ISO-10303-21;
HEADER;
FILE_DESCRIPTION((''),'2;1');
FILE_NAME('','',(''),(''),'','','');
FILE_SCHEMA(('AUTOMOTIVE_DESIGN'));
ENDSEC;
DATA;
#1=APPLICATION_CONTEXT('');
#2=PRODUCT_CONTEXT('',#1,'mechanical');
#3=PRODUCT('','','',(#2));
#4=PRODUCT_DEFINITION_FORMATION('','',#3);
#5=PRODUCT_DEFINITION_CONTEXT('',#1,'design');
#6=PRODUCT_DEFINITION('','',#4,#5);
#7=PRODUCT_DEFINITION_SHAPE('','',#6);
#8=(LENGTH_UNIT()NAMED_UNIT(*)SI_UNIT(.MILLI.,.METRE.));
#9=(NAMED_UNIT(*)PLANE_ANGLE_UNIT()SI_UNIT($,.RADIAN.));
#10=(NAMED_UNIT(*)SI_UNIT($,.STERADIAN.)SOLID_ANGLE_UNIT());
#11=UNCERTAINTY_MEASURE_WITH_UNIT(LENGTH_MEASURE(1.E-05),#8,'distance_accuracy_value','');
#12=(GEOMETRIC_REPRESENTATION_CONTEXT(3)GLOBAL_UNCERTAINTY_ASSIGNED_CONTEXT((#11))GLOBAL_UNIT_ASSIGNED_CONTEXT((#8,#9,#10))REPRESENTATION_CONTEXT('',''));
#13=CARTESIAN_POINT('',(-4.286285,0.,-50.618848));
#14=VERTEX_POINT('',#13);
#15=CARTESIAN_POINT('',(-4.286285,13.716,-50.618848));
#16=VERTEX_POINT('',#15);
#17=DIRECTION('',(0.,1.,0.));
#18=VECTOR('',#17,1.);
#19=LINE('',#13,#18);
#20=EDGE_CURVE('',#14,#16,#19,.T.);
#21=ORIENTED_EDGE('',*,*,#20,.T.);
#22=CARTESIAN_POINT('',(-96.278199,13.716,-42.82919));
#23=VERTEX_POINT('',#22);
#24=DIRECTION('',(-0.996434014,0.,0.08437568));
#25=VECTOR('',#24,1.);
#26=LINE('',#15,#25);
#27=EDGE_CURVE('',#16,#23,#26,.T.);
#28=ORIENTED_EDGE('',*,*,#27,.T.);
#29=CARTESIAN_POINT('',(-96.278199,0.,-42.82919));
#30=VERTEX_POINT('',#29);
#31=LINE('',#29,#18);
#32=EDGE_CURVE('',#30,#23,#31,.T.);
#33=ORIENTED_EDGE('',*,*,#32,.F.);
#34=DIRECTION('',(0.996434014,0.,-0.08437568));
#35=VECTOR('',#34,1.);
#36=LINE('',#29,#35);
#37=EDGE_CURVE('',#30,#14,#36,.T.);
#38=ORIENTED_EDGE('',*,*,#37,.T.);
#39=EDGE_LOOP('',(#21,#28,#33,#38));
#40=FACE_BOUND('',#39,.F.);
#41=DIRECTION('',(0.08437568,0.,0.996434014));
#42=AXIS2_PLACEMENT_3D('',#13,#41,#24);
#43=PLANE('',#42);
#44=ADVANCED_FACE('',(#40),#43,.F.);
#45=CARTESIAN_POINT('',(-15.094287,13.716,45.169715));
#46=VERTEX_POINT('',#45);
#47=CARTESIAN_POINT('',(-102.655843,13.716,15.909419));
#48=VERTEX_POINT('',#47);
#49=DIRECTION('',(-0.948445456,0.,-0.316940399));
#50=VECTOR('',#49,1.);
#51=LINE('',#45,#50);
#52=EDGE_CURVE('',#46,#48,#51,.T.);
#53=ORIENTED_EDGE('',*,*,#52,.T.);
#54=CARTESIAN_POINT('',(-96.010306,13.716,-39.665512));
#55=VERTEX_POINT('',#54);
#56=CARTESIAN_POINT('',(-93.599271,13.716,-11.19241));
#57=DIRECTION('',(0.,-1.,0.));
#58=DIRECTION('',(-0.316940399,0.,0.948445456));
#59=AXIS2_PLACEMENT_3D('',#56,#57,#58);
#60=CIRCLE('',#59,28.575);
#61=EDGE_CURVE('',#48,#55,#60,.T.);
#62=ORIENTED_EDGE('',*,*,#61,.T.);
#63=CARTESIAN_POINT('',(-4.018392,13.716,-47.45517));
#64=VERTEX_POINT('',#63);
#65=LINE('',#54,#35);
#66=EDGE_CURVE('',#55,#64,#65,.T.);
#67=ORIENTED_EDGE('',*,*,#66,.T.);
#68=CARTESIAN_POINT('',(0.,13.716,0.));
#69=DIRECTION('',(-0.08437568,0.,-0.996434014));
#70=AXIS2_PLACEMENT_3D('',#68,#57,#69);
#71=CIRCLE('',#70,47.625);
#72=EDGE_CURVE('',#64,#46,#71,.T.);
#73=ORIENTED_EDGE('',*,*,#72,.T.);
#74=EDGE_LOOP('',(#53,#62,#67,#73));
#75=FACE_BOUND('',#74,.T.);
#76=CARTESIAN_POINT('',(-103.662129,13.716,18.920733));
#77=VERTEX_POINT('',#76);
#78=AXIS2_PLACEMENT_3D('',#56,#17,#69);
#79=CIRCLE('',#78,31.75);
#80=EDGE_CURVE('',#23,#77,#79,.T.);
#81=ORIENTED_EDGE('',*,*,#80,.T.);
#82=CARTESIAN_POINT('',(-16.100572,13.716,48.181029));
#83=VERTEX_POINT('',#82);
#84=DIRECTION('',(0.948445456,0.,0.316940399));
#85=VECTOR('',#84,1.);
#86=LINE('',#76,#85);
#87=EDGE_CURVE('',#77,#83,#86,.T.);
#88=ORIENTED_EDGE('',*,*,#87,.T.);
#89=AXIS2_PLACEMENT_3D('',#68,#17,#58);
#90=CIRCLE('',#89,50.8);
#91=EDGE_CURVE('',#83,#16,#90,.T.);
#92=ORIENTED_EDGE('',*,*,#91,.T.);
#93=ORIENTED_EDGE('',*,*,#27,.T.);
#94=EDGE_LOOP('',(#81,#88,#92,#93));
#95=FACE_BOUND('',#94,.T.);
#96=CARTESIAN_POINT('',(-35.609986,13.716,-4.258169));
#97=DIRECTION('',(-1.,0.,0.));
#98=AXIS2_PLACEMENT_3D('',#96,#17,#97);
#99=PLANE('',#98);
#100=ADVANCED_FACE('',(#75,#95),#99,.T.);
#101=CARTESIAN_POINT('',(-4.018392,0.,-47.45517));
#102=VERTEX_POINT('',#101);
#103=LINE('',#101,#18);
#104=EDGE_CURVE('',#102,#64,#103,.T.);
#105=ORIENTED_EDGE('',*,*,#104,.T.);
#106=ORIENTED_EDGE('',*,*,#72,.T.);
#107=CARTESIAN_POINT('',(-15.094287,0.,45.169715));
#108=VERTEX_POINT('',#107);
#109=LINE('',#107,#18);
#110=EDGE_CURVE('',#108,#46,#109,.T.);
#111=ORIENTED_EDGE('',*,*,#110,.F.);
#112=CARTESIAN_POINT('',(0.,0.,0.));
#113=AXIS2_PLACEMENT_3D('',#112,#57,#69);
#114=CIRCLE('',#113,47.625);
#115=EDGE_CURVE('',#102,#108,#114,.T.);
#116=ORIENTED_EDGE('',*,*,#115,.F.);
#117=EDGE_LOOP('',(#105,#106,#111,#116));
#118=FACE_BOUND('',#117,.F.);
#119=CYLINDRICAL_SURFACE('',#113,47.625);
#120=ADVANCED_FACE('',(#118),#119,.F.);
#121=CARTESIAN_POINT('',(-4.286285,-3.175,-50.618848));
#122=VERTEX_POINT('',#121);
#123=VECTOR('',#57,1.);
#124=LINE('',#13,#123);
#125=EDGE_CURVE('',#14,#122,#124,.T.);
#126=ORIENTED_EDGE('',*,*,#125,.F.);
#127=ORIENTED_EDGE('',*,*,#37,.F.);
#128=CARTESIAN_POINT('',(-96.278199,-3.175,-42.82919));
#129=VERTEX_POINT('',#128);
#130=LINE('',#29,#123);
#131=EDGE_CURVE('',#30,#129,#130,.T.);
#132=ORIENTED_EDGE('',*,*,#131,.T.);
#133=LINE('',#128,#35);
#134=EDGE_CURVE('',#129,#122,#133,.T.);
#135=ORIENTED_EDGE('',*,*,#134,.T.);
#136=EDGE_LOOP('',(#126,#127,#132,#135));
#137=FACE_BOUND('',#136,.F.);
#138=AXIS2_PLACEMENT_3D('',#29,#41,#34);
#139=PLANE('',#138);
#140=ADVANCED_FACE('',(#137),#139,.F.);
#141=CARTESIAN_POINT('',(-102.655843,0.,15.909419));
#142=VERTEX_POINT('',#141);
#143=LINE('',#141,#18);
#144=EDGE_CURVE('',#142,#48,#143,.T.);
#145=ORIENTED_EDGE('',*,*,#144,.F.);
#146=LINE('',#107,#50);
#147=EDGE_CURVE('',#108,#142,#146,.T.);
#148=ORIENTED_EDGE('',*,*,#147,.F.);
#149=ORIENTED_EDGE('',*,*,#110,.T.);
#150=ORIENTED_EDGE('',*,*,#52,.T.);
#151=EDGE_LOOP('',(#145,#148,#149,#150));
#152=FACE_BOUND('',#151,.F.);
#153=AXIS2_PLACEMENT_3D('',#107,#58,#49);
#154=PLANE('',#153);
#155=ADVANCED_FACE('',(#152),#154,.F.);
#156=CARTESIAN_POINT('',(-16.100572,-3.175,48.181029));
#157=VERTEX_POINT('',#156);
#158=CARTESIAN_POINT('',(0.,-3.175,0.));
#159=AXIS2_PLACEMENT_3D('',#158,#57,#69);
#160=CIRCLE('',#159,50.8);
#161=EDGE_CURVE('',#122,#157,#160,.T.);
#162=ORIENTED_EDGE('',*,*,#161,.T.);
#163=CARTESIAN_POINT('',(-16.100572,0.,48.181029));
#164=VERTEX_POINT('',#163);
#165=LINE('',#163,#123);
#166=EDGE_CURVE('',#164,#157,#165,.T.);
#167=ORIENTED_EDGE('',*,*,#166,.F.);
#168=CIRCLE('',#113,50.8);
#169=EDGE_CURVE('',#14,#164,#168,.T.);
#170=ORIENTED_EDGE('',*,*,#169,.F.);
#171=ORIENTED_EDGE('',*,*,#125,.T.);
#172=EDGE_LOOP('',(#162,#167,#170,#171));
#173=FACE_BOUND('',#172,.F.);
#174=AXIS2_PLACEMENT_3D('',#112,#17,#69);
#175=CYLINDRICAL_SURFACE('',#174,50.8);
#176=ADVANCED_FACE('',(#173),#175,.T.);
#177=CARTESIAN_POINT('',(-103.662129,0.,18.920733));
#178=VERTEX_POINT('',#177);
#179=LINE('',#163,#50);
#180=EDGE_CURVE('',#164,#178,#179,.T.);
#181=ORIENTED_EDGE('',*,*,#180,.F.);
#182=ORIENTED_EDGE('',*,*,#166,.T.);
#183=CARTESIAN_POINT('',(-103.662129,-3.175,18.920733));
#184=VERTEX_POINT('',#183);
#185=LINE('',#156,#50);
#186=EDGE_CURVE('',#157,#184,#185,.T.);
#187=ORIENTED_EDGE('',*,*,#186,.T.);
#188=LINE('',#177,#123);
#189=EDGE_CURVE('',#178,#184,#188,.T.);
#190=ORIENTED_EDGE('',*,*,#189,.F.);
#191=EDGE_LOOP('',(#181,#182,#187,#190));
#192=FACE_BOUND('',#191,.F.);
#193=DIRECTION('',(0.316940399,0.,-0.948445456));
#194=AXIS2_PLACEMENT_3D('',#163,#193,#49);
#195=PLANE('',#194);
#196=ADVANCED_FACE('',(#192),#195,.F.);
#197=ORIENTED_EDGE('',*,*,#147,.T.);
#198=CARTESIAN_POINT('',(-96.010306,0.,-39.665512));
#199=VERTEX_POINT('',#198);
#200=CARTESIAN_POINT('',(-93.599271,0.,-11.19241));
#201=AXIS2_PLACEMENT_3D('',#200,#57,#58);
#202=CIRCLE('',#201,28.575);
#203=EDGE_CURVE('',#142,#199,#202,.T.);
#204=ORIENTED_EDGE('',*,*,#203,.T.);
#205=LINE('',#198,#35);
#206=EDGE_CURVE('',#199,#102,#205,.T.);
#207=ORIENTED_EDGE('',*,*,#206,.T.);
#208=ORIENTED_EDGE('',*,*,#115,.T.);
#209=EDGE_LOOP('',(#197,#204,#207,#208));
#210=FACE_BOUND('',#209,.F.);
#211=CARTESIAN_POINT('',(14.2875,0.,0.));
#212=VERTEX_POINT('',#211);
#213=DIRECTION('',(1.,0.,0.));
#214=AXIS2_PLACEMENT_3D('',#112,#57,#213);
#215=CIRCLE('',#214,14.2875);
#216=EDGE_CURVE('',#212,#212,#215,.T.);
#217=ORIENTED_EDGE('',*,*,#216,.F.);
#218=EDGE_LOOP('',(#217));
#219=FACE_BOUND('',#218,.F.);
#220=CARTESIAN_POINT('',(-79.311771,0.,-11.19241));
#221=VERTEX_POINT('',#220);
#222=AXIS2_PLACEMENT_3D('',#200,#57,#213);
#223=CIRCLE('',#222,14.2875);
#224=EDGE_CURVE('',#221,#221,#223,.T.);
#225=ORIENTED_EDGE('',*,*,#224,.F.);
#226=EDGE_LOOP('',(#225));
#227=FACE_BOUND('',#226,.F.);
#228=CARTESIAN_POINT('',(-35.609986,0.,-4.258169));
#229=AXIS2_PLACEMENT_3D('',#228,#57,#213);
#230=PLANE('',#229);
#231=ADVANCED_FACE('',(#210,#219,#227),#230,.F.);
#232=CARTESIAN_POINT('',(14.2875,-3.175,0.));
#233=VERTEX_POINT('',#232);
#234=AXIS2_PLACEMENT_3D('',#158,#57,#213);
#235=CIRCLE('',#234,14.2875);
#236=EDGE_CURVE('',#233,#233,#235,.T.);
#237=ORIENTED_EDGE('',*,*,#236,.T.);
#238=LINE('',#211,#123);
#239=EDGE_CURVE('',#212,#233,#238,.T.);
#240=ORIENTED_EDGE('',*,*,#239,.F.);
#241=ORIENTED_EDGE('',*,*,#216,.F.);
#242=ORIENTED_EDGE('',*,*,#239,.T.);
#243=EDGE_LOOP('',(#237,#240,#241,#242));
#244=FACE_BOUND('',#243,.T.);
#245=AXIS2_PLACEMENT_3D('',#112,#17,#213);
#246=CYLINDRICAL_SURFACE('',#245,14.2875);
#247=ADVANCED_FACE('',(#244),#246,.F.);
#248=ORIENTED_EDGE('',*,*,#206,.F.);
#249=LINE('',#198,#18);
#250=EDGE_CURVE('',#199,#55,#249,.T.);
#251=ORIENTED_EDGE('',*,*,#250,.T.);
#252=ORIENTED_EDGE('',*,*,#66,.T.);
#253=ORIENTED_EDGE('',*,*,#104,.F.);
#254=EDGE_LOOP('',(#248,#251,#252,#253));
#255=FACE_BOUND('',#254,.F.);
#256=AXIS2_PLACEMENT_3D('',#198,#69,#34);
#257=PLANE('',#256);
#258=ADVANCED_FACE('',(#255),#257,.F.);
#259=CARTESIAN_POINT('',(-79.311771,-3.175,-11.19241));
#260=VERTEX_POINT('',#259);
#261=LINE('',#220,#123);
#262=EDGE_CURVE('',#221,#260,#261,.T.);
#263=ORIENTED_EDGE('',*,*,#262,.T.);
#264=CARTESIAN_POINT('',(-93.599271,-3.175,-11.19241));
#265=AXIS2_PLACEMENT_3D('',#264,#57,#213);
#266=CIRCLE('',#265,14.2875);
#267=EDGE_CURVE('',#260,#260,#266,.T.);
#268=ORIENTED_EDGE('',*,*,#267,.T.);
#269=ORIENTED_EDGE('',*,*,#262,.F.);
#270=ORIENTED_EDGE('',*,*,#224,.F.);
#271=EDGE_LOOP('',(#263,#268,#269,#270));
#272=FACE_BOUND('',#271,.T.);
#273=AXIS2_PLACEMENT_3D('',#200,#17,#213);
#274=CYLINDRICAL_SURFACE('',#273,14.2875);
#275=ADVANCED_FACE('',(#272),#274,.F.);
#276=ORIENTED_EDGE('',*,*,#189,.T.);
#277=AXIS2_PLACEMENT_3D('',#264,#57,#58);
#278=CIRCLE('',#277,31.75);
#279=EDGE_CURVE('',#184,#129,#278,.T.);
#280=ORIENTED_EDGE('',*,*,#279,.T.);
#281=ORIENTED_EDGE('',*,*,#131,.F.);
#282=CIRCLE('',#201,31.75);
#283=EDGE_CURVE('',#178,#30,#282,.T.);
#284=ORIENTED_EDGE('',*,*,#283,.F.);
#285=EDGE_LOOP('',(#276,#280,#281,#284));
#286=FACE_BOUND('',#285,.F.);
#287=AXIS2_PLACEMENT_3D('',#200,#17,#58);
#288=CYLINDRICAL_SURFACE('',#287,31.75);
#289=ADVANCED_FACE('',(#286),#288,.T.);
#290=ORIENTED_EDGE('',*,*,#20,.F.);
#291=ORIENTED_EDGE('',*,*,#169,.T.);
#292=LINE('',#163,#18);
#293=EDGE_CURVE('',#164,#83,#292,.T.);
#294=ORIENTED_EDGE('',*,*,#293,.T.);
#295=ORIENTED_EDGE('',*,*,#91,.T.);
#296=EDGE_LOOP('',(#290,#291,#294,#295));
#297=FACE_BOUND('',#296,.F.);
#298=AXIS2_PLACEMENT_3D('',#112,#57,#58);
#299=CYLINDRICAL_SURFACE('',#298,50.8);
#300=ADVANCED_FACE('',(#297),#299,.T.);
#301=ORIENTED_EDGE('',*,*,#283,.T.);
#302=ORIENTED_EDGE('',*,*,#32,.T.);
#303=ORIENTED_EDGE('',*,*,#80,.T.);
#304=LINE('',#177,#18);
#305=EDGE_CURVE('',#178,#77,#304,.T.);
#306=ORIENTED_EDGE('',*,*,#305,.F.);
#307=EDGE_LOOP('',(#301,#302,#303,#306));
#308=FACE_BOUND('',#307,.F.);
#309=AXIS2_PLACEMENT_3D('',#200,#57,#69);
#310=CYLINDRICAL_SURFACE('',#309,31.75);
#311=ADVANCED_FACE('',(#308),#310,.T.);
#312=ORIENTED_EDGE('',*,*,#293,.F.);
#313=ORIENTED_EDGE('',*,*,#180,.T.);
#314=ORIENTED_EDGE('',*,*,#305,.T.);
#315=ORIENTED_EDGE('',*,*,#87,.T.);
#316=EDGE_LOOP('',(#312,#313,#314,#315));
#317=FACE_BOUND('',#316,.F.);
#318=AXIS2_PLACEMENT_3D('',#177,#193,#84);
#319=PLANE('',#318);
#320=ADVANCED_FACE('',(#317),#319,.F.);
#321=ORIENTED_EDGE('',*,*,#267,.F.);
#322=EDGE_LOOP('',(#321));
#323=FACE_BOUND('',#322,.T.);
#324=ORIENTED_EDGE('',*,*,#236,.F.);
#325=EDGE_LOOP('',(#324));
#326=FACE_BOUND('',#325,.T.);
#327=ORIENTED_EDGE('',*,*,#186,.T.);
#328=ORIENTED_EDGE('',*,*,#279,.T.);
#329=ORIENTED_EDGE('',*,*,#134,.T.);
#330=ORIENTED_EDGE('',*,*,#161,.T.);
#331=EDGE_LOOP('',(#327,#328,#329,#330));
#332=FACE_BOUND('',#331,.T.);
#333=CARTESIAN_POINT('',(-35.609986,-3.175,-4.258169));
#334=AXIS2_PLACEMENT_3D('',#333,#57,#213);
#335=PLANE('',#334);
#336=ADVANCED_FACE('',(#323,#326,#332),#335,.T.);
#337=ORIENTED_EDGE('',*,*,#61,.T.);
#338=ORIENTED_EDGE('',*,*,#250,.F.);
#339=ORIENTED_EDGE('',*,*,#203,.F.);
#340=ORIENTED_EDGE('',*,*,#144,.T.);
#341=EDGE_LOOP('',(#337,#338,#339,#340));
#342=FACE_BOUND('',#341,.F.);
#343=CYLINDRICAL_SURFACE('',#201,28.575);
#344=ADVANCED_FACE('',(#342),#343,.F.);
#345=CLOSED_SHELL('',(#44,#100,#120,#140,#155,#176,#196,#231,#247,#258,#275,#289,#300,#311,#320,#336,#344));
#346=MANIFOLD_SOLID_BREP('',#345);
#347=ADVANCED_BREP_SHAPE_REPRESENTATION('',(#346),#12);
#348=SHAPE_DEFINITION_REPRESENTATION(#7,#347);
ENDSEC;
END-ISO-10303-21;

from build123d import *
from build123d import SkipClean  # not in build123d's __all__

# Parameters (mm, degrees)
F0_R     = 14.2875
F1_DEPTH = 3.175
F3_DEPTH = 13.716


# Not quite as in the source:
# - a feature names something its author has since deleted; it is built from what else it names


with BuildPart() as f1:
    # F0 (on Front) → F1 (new body)
    with BuildSketch(Plane.XZ):
        with BuildLine():
            Line((-96.2781986811, -42.8291897772), (-4.2862845567, -50.6188479195))
            ThreePointArc((-4.2862845567, -50.6188479195), (50.4406573252, 6.0315908845), (-16.1005722699, 48.1810291773))
            Line((-16.1005722699, 48.1810291773), (-103.6621285019, 18.9207334083))
            ThreePointArc((-103.6621285019, 18.9207334083), (-125.3487825032, -11.3685027389), (-103.3274855148, -41.4153206587))
            ThreePointArc((-103.3274855148, -41.4153206587), (-99.8429919119, -42.3224346764), (-96.2781986811, -42.8291897772))
        make_face()
        with BuildLine():
            Line((-102.655842735, 15.9094190847), (-15.0942865031, 45.1697148537))
            ThreePointArc((-15.0942865031, 45.1697148537), (47.2881162424, 5.6546164542), (-4.0183917719, -47.4551699245))
            Line((-4.0183917719, -47.4551699245), (-96.0103058963, -39.6655117822))
            ThreePointArc((-96.0103058963, -39.6655117822), (-121.9721405786, -14.5851797), (-102.655842735, 15.9094190847))
        make_face(mode=Mode.SUBTRACT)
        with BuildLine():
            ThreePointArc((-4.0183917719, -47.4551699245), (47.2881162424, 5.6546164542), (-15.0942865031, 45.1697148537))
            Line((-15.0942865031, 45.1697148537), (-102.655842735, 15.9094190847))
            ThreePointArc((-102.655842735, 15.9094190847), (-121.9721405786, -14.5851797), (-96.0103058963, -39.6655117822))
            Line((-96.0103058963, -39.6655117822), (-4.0183917719, -47.4551699245))
        make_face()
        with Locations((-93.5992708332, -11.1924098275)):
            Circle(F0_R, mode=Mode.SUBTRACT)
        Circle(F0_R, mode=Mode.SUBTRACT)
    extrude(amount=F1_DEPTH)

    # F2 (on face) → F3 (join)
    with BuildSketch(Plane(origin=(0, 0, 0), x_dir=(-1, 0, 0), z_dir=(0, 1, 0))):
        with BuildLine():
            ThreePointArc((96.2781986811, -42.8291897772), (125.1246816615, -14.9621541303), (103.6621285019, 18.9207334083))
            Line((103.6621285019, 18.9207334083), (16.1005722699, 48.1810291773))
            ThreePointArc((16.1005722699, 48.1810291773), (-50.4406573252, 6.0315908845), (4.2862845567, -50.6188479195))
            Line((4.2862845567, -50.6188479195), (96.2781986811, -42.8291897772))
        make_face()
        with BuildLine():
            Line((15.0942865031, 45.1697148537), (102.655842735, 15.9094190847))
            ThreePointArc((102.655842735, 15.9094190847), (121.9721405786, -14.5851797), (96.0103058963, -39.6655117822))
            Line((96.0103058963, -39.6655117822), (4.0183917719, -47.4551699245))
            ThreePointArc((4.0183917719, -47.4551699245), (-47.2881162424, 5.6546164542), (15.0942865031, 45.1697148537))
        make_face(mode=Mode.SUBTRACT)
    with SkipClean():  # cleaning this boolean's faces spoils the solid; the shape is the same uncleaned
        extrude(amount=F3_DEPTH)


solid = f1.part
